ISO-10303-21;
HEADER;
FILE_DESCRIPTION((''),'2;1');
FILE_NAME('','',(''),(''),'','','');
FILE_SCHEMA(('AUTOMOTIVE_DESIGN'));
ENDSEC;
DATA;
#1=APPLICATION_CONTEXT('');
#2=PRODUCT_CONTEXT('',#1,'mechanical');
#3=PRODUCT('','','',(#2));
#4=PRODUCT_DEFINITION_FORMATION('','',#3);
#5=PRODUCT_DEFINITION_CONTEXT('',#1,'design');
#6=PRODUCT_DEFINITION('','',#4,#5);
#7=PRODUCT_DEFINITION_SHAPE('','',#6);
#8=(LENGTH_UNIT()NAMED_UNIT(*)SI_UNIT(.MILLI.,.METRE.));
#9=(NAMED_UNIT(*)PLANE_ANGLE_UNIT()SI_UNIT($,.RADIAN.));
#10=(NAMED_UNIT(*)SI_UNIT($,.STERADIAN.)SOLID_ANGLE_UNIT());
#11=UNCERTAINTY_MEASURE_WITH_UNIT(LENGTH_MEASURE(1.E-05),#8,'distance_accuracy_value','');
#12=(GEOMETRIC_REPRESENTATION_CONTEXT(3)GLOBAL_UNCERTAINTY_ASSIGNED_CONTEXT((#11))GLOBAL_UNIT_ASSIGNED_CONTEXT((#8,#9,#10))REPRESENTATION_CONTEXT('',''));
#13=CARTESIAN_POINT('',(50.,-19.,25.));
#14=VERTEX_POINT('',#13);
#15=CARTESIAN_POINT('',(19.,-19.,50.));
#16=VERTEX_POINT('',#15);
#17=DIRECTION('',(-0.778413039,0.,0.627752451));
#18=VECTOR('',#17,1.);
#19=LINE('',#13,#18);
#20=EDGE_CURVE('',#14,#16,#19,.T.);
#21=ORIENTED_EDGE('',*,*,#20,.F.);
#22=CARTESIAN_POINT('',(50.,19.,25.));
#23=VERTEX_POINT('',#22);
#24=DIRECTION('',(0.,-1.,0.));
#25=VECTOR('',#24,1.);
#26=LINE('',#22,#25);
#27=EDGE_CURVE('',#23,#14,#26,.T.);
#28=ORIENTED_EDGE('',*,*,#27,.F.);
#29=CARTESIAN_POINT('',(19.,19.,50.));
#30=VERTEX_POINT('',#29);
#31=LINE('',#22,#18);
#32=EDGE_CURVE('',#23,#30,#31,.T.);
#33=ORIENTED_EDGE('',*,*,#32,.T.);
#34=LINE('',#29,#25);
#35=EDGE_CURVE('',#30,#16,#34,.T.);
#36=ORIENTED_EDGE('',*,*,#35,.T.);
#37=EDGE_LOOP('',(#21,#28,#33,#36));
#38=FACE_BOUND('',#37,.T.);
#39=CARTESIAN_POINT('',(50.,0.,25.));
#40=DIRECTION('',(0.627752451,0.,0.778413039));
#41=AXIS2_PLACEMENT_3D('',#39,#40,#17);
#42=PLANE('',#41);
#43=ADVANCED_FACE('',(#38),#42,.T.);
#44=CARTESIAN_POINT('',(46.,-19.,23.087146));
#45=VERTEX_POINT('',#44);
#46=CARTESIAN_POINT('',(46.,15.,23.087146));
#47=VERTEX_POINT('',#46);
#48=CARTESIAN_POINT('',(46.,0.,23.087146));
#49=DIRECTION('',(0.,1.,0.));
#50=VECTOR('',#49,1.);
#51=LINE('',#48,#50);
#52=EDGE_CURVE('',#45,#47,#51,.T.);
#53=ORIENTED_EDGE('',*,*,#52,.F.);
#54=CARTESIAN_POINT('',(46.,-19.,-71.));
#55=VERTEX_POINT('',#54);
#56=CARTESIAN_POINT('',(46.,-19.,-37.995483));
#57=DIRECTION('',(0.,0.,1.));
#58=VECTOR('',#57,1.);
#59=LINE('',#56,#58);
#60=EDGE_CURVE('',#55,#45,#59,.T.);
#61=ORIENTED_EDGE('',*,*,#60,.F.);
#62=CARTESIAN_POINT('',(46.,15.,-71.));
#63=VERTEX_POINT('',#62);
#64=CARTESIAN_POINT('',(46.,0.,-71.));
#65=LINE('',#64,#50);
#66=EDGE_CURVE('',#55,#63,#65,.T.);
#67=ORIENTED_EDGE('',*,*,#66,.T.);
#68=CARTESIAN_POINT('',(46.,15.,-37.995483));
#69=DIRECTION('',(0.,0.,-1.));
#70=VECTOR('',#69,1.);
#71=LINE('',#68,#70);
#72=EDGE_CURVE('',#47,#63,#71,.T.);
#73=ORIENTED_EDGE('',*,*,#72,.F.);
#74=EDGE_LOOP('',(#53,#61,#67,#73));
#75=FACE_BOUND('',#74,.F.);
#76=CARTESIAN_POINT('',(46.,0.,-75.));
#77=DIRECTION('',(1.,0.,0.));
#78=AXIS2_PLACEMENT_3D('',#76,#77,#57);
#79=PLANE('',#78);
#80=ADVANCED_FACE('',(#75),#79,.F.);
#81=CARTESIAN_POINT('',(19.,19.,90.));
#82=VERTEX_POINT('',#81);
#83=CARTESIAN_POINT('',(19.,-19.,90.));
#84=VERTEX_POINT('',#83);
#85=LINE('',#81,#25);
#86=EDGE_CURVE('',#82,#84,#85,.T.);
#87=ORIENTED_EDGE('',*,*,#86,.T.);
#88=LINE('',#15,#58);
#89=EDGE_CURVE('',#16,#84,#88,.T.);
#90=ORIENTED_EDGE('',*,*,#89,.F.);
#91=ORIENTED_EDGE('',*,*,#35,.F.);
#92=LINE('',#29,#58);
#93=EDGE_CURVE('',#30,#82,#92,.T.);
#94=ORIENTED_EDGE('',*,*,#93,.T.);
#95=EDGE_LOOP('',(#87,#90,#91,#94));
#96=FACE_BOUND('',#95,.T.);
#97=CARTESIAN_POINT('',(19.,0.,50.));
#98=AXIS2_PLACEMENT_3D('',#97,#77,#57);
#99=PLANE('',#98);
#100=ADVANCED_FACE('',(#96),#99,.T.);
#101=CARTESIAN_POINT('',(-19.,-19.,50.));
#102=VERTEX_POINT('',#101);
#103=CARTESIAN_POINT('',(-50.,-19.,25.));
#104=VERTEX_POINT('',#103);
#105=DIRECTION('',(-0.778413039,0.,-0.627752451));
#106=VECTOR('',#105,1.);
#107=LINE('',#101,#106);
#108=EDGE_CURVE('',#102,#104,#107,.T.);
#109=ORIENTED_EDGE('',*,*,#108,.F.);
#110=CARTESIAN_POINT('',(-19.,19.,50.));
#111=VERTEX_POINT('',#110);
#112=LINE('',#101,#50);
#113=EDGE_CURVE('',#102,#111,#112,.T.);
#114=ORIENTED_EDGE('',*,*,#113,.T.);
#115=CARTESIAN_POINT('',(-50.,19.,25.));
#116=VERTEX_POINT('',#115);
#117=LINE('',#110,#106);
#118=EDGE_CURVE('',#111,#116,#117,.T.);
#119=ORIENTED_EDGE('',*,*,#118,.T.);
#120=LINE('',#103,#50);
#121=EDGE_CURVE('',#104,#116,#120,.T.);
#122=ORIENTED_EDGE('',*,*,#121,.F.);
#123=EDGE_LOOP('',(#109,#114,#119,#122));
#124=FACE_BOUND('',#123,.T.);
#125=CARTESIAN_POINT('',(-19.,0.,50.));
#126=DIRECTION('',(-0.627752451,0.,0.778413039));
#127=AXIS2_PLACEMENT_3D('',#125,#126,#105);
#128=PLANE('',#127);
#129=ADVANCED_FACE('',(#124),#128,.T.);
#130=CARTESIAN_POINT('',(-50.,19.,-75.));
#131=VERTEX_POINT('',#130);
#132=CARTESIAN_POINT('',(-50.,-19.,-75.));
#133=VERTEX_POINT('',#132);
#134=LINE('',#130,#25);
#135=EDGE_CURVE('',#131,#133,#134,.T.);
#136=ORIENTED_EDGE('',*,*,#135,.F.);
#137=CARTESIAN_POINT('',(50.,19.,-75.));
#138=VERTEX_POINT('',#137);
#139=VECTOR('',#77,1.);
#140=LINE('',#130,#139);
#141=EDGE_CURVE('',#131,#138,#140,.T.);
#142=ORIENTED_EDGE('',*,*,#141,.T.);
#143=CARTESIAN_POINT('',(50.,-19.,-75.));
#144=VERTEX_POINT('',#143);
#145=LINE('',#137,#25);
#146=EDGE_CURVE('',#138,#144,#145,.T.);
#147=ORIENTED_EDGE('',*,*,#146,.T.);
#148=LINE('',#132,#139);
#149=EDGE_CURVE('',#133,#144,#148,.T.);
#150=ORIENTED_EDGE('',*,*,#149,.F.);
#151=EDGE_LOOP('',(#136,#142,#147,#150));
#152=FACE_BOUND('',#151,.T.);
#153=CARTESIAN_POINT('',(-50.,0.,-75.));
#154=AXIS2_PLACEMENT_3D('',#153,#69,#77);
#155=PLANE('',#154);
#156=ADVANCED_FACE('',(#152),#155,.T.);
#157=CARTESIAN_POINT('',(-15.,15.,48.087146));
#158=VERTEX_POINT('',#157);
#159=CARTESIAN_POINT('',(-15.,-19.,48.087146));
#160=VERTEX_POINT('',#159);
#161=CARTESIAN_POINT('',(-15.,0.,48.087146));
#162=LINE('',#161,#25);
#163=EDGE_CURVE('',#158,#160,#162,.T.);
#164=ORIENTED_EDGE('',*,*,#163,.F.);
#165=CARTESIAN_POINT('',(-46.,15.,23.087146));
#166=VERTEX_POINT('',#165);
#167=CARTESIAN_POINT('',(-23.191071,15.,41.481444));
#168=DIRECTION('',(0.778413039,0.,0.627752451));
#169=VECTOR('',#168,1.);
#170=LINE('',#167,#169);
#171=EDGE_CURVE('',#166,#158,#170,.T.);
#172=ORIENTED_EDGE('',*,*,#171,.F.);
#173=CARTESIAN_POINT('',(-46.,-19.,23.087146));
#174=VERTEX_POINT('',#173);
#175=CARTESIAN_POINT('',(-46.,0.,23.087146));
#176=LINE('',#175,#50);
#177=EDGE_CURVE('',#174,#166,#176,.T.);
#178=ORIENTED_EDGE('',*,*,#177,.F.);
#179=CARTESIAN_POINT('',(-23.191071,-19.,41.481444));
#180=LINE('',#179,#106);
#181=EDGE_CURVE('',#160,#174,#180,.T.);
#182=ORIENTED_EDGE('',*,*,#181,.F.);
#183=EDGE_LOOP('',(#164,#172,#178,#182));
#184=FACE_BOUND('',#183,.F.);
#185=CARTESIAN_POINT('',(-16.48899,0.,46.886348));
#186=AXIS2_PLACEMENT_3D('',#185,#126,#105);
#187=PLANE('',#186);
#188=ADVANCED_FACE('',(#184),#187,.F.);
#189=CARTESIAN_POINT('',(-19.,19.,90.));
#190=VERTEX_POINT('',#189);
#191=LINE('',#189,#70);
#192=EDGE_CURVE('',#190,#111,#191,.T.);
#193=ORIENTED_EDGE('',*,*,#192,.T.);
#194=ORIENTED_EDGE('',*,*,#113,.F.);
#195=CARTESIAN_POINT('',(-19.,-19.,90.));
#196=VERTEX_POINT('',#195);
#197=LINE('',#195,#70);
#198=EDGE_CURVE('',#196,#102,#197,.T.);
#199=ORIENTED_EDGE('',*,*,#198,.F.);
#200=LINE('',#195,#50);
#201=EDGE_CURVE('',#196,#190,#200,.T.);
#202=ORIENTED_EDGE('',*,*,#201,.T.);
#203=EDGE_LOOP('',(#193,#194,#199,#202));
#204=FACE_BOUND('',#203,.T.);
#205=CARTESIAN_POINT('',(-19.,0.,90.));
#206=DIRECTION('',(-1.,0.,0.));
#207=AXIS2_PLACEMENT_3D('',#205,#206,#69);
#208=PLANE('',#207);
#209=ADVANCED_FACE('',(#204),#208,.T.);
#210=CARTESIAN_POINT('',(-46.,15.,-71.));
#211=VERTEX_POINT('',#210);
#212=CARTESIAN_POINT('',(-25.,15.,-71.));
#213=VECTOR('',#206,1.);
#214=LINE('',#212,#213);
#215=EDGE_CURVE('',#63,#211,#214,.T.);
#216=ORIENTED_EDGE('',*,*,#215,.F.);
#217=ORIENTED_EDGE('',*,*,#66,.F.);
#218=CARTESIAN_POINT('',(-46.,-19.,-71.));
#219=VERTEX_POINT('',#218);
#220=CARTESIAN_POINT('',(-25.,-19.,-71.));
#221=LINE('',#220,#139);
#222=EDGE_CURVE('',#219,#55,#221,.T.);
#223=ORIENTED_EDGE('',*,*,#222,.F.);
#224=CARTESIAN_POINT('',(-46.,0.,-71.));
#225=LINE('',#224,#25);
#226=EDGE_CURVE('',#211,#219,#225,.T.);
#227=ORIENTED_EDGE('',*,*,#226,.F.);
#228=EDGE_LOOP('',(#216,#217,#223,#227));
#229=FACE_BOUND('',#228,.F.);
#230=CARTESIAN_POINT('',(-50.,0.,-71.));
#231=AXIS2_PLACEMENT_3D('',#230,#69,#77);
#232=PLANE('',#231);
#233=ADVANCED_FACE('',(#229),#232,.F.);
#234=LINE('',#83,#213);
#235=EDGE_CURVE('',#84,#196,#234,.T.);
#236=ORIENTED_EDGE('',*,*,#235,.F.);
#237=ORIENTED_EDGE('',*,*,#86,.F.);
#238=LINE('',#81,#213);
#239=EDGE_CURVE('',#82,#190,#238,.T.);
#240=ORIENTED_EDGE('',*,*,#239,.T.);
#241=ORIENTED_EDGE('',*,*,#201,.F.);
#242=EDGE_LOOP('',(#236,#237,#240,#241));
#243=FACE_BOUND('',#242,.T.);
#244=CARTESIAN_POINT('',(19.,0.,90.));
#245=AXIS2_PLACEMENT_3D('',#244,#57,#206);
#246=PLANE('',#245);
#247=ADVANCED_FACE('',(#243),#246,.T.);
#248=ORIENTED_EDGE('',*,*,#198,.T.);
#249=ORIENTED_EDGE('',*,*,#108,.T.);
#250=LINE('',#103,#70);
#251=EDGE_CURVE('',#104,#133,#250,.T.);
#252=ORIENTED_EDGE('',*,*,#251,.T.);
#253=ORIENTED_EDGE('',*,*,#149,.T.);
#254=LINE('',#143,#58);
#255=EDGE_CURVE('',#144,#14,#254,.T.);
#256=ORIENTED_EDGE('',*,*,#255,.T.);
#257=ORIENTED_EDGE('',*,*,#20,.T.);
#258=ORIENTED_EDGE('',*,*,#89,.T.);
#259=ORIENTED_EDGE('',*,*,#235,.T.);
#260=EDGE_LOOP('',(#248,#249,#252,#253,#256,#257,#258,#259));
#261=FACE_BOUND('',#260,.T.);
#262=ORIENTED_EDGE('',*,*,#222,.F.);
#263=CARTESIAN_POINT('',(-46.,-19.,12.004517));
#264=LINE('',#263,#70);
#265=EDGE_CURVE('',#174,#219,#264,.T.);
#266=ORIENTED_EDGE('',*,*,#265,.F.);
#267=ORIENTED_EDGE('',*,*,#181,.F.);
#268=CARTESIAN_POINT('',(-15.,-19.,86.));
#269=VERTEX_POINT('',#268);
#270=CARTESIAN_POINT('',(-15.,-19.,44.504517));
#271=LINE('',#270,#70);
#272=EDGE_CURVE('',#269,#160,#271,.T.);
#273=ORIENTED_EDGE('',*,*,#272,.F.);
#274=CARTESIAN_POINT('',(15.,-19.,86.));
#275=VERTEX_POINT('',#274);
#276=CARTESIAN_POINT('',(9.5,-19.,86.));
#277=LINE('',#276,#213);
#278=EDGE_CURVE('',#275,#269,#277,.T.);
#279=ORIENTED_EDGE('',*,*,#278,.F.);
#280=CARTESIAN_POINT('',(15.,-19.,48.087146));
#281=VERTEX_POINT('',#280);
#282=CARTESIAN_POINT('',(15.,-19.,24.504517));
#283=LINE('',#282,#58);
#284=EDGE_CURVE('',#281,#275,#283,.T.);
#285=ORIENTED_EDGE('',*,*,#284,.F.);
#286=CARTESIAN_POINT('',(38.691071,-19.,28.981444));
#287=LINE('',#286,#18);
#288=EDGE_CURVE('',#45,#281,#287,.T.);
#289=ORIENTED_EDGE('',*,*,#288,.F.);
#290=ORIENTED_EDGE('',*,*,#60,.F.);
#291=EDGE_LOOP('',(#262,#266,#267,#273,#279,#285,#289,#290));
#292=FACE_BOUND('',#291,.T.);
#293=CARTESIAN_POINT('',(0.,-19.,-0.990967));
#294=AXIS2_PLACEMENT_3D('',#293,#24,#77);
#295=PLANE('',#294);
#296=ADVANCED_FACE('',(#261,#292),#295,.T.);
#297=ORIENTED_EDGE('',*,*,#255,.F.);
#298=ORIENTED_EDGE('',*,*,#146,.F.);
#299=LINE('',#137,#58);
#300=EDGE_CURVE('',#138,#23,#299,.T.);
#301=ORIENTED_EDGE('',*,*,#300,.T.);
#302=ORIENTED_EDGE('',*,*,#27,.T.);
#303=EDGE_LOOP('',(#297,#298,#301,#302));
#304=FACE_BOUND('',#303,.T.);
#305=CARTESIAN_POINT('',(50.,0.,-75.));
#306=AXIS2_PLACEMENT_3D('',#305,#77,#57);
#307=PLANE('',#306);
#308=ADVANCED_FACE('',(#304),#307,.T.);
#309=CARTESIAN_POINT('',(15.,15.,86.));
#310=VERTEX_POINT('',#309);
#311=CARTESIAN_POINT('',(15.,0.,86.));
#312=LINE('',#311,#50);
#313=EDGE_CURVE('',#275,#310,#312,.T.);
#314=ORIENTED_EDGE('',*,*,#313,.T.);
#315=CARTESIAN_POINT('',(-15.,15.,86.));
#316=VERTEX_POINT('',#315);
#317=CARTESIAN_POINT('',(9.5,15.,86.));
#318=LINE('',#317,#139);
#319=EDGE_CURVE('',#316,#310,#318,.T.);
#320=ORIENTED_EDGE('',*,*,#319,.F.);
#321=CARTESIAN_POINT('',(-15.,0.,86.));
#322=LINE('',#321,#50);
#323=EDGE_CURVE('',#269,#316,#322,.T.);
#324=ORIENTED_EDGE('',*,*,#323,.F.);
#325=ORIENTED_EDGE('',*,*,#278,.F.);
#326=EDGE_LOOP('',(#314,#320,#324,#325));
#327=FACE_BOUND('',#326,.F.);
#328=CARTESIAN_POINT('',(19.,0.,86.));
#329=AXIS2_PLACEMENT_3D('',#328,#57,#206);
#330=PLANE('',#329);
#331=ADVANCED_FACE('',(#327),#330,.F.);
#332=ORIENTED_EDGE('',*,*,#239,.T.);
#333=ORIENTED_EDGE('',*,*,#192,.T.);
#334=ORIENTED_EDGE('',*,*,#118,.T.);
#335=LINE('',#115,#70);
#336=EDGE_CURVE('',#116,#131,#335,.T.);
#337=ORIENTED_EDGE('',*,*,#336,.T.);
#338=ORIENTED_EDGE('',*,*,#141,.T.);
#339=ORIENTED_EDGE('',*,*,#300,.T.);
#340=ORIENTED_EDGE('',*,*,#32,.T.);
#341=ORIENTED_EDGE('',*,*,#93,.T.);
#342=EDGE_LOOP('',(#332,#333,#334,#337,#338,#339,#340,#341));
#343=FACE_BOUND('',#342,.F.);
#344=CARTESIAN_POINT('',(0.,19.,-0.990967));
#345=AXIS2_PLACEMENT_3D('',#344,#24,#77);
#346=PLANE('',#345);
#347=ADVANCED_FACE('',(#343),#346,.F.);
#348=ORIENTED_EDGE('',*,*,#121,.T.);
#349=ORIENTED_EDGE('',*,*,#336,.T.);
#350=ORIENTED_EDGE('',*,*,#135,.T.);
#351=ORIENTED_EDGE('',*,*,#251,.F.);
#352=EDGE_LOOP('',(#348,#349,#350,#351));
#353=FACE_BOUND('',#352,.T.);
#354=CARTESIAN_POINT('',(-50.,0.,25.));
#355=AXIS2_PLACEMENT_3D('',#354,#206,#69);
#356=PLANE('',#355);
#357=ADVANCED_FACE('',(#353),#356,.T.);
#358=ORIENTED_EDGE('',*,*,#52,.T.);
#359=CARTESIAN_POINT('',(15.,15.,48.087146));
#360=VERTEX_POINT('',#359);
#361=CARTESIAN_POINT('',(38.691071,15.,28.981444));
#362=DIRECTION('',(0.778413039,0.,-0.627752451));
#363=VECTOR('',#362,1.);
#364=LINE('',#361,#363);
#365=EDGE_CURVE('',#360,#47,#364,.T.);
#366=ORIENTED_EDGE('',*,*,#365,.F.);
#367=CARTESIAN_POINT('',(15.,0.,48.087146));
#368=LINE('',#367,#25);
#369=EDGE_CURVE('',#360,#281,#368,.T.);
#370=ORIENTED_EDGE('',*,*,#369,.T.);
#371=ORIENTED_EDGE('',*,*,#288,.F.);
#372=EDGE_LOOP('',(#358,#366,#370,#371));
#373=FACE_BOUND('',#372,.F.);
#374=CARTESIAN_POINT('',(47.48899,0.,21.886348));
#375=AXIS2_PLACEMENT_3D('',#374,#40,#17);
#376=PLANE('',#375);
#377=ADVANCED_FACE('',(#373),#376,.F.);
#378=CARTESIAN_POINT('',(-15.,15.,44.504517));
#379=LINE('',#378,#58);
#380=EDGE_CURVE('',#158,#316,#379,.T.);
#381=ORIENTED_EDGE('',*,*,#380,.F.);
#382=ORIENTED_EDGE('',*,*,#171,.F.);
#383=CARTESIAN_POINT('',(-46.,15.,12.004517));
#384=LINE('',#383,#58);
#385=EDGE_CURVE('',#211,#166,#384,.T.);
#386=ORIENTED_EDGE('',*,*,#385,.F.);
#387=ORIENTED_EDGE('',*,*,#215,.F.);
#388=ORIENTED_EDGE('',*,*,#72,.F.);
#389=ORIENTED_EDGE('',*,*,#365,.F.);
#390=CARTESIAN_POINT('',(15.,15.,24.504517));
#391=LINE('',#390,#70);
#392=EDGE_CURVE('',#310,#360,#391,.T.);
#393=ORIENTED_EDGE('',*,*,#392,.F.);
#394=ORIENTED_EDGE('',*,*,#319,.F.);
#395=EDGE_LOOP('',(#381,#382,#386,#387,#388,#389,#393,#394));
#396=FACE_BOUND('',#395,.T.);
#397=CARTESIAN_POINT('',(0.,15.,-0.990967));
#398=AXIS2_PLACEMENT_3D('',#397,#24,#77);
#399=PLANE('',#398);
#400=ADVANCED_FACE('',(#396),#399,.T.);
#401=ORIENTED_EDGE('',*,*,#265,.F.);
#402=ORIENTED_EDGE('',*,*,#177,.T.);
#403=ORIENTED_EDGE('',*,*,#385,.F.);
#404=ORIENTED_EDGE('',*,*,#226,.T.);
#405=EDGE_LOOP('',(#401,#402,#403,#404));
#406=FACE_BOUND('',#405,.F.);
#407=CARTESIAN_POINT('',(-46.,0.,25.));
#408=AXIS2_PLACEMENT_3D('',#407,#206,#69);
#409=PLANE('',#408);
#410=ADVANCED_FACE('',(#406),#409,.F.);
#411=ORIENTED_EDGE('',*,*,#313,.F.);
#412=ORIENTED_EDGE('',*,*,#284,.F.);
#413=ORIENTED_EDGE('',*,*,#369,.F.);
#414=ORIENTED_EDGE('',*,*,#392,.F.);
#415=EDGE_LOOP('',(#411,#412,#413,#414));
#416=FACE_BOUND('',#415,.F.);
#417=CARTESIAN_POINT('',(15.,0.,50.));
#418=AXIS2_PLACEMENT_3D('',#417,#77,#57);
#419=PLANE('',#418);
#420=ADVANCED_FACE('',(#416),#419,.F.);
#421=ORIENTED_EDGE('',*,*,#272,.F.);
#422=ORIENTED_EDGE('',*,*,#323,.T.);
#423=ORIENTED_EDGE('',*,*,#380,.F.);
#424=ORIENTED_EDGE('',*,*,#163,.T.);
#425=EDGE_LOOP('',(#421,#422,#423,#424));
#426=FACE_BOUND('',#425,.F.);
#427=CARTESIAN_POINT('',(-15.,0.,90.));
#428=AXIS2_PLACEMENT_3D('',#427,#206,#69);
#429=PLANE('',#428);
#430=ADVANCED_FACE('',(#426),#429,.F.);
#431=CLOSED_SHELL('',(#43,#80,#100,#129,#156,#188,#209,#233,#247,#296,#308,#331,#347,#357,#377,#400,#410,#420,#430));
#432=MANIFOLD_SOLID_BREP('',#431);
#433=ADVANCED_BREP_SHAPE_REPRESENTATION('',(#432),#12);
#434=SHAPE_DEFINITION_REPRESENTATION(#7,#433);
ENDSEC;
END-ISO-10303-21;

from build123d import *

# Parameters (mm, degrees)
F1_DEPTH = 19
F2_T     = -4


with BuildPart() as f1:
    # F0 (on Front) → F1 (new body, symmetric)
    with BuildSketch(Plane.XZ):
        Polygon((-50, 25), (-50, -75), (50, -75), (50, 25), (19, 50), (19, 90), (-19, 90), (-19, 50), align=None)
    extrude(amount=F1_DEPTH, both=True)

    # F2
    f2_openings = [f1.faces().sort_by_distance(p)[0] for p in [
        (0, -19, -6.201711),
    ]]
    offset(amount=F2_T, openings=f2_openings, kind=Kind.INTERSECTION)


solid = f1.part
